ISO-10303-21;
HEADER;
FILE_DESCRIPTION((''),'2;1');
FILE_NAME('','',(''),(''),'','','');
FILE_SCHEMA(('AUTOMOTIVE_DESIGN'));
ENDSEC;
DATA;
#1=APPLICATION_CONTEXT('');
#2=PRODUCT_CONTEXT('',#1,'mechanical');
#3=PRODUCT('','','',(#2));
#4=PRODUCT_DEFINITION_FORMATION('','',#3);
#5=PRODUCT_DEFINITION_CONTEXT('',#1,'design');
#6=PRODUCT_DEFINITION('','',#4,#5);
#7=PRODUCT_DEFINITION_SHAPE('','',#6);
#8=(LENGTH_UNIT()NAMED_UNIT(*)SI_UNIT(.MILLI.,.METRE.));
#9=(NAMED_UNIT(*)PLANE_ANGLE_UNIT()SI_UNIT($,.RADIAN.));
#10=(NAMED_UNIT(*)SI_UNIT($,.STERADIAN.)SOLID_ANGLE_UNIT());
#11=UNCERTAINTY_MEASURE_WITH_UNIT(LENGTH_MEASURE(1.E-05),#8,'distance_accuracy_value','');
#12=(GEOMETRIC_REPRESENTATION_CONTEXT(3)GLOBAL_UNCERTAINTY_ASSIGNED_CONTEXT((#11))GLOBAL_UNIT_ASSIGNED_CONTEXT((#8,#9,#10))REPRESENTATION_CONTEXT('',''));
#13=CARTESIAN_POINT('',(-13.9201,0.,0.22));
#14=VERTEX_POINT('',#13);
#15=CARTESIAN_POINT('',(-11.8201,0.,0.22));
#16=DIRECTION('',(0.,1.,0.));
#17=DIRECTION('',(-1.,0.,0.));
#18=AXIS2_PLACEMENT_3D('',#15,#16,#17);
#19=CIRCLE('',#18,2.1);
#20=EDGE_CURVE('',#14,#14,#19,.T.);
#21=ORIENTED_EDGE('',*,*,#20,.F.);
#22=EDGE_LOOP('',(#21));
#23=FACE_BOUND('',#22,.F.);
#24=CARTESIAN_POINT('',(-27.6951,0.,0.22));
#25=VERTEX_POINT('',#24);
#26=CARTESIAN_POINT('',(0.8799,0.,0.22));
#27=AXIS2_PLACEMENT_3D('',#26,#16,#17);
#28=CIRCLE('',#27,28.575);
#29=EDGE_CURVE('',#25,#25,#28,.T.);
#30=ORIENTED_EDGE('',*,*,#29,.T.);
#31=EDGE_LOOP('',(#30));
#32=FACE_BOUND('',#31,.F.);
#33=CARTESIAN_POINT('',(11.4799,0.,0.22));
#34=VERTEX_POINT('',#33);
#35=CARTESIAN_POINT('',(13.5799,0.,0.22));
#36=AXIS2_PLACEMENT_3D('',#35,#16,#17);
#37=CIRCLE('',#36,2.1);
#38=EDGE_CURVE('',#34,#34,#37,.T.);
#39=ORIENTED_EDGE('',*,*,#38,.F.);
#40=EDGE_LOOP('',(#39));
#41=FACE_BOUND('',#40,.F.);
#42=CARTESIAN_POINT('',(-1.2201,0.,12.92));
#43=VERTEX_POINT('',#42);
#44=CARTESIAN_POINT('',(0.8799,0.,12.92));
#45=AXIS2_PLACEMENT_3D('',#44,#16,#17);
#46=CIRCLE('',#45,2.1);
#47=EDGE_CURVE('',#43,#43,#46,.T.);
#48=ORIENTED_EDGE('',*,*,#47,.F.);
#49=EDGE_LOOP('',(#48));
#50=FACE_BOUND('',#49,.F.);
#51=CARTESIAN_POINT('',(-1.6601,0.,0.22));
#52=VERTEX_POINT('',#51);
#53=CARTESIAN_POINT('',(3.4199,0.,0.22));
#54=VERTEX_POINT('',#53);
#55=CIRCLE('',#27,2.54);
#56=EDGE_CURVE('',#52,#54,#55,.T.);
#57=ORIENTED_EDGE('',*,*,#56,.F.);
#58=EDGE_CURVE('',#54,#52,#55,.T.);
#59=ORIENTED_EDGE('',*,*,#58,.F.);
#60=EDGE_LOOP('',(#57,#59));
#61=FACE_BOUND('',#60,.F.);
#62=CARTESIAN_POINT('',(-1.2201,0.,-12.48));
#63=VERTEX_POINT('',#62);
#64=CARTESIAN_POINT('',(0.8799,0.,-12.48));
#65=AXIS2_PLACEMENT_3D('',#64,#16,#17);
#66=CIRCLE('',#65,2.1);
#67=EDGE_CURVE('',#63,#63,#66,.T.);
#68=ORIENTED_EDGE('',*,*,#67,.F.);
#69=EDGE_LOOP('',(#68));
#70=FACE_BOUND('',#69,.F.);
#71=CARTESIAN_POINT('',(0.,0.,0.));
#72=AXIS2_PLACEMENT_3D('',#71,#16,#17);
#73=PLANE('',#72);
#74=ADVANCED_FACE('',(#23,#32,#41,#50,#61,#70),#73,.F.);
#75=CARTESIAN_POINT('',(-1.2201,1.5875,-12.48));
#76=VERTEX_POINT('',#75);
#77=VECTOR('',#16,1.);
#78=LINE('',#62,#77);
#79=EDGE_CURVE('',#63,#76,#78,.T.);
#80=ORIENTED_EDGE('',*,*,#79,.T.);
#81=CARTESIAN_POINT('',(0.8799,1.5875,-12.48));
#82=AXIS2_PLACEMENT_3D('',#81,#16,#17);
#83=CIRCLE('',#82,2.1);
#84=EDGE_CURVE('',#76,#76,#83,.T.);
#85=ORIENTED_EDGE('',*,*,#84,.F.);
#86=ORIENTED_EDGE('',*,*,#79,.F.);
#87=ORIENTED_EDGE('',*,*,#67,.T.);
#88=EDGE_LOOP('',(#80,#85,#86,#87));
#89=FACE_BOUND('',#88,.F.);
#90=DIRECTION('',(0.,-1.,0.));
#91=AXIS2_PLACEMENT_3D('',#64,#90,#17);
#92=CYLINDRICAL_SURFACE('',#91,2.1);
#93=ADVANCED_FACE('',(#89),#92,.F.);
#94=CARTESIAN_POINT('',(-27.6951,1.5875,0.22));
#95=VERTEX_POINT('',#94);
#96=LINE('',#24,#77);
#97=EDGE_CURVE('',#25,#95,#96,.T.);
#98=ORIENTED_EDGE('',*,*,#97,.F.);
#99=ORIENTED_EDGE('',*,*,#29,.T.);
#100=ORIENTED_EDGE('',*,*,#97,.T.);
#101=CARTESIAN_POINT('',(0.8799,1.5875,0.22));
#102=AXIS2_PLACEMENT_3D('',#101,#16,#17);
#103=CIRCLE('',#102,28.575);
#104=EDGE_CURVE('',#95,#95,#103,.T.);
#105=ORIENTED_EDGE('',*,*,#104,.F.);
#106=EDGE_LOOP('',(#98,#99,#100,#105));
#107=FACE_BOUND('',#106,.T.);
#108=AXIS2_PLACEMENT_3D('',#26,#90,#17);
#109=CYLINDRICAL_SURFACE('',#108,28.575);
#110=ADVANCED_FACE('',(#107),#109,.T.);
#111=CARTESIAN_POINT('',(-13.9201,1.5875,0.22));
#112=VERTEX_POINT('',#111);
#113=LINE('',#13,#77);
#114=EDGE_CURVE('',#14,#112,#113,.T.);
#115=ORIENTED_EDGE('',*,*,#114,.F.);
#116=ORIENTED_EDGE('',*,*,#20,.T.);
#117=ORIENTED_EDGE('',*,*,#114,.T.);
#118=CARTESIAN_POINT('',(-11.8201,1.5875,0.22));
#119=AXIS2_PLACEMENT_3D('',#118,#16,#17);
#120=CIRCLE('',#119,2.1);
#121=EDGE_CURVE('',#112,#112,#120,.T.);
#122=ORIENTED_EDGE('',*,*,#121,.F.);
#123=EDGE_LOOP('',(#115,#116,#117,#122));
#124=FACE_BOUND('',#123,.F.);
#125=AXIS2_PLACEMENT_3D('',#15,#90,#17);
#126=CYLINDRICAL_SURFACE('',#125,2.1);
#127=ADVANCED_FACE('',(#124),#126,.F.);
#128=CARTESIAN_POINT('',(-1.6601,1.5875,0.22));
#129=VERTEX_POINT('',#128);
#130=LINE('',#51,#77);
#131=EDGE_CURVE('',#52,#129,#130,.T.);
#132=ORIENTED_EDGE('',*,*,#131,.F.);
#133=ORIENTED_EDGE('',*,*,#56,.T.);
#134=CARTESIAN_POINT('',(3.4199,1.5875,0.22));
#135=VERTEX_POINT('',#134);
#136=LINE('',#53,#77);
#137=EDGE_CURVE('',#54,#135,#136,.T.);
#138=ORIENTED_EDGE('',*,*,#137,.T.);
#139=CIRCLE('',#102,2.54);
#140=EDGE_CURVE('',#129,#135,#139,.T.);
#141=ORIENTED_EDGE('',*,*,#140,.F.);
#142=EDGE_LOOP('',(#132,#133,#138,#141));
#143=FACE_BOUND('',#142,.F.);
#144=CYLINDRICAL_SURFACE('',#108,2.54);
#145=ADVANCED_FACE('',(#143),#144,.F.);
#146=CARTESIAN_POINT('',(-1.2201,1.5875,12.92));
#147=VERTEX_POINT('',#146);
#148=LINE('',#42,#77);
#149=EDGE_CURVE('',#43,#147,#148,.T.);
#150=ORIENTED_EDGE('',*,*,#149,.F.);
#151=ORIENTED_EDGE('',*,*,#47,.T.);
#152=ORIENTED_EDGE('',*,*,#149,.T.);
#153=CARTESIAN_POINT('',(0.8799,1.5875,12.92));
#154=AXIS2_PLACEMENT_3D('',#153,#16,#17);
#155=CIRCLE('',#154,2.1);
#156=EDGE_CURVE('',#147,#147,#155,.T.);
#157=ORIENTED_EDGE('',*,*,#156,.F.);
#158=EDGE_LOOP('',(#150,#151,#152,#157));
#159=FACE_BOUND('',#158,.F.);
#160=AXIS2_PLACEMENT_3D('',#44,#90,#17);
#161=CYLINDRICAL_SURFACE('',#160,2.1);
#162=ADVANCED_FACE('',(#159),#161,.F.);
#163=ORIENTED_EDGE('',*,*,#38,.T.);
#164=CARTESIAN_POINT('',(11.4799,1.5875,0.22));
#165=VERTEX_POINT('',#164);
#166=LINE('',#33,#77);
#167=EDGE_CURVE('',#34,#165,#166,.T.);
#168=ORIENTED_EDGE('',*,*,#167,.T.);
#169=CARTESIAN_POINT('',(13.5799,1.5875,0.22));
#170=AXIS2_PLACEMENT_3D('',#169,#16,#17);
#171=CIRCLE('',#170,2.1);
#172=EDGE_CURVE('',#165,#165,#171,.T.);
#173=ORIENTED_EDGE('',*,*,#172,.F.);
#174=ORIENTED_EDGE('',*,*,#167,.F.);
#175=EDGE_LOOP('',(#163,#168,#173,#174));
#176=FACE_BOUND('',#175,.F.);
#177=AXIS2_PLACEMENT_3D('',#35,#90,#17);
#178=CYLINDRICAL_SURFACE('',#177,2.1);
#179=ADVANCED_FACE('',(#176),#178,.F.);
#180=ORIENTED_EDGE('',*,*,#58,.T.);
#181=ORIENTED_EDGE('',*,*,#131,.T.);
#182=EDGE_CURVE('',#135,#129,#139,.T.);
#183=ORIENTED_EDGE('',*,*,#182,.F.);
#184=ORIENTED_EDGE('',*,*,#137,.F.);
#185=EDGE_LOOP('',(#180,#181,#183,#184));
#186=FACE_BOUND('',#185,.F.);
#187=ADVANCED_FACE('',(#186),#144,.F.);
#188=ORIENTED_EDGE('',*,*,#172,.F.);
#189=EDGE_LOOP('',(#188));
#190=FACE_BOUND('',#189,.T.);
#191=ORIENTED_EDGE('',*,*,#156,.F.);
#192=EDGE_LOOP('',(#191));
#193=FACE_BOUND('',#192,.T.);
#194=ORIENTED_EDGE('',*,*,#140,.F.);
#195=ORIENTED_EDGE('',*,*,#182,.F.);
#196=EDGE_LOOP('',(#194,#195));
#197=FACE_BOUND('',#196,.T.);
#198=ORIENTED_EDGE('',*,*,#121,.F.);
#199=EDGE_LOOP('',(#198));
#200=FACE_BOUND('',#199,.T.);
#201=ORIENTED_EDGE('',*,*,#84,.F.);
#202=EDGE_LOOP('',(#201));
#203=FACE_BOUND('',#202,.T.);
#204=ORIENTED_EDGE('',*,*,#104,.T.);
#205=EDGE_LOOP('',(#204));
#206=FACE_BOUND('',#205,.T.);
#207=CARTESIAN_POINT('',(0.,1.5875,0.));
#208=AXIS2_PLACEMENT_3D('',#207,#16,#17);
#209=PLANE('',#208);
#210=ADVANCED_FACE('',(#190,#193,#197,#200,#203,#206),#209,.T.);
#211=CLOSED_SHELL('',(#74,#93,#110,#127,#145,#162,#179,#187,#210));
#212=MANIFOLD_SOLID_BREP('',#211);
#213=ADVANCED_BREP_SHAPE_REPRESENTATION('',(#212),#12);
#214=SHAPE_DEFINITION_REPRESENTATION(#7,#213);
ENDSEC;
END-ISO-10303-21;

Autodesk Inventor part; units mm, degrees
ref_plane "YZ Plane" through (0, 0, 0) normal (1, 0, 0) x (0, 1, 0)
ref_plane "XZ Plane" through (0, 0, 0) normal (0, 1, 0) x (-1, 0, 0)
ref_plane "XY Plane" through (0, 0, 0) normal (0, 0, 1) x (1, 0, 0)
sketch "Sketch1" plane through (0, 0, 0) normal (0, 1, 0) x (-1, 0, 0)
  circle A0 centre (-0.8799, 12.92) radius 2.1
  circle A1 centre (-13.5799, 0.22) radius 2.1
  circle A2 centre (-0.8799, -12.48) radius 2.1
  circle A3 centre (11.8201, 0.22) radius 2.1
  circle A4 centre (-0.8799, 0.22) radius 28.575
  line L0 (-13.5799, 0.22) -> (-0.8799, 0.22)
  circle A5 centre (-0.8799, 0.22) radius 2.54
  point P0 (0, 0)
  dimension "d0" = 57.15
  dimension "d1" = 5.08
extrude "Extrusion1" add sketch "Sketch1" along normal blind 1.5875
sketch "Sketch2" plane through (0, 0, 0) normal (0, 1, 0) x (-1, 0, 0)
  circle A0 centre (-0.8799, 0.22) radius 28.575 projected
  circle A1 centre (-13.5799, 0.22) radius 2.1 projected
  circle A2 centre (-0.8799, -12.48) radius 2.1 projected
  circle A3 centre (-0.8799, 0.22) radius 2.54 projected
  circle A4 centre (-0.8799, 12.92) radius 2.1 projected
  circle A5 centre (11.8201, 0.22) radius 2.1 projected
  point P0 (0, 0)
equation "\"BendRadius\" = Thickness"
equation "\"BendReliefWidth\" = Thickness"
equation "\"BendReliefDepth\" = 0.5 * Thickness"
equation "\"CornerReliefSize\" = 4 * Thickness"
equation "\"MinimumRemnant\" = 2 * Thickness"
equation "\"TransitionRadius\" = BendRadius"
equation "\"JacobiRadiusSize\" = BendRadius"
equation "\"GapSize\" = Thickness"
equation "\"Thickness\" = 1.5875"
